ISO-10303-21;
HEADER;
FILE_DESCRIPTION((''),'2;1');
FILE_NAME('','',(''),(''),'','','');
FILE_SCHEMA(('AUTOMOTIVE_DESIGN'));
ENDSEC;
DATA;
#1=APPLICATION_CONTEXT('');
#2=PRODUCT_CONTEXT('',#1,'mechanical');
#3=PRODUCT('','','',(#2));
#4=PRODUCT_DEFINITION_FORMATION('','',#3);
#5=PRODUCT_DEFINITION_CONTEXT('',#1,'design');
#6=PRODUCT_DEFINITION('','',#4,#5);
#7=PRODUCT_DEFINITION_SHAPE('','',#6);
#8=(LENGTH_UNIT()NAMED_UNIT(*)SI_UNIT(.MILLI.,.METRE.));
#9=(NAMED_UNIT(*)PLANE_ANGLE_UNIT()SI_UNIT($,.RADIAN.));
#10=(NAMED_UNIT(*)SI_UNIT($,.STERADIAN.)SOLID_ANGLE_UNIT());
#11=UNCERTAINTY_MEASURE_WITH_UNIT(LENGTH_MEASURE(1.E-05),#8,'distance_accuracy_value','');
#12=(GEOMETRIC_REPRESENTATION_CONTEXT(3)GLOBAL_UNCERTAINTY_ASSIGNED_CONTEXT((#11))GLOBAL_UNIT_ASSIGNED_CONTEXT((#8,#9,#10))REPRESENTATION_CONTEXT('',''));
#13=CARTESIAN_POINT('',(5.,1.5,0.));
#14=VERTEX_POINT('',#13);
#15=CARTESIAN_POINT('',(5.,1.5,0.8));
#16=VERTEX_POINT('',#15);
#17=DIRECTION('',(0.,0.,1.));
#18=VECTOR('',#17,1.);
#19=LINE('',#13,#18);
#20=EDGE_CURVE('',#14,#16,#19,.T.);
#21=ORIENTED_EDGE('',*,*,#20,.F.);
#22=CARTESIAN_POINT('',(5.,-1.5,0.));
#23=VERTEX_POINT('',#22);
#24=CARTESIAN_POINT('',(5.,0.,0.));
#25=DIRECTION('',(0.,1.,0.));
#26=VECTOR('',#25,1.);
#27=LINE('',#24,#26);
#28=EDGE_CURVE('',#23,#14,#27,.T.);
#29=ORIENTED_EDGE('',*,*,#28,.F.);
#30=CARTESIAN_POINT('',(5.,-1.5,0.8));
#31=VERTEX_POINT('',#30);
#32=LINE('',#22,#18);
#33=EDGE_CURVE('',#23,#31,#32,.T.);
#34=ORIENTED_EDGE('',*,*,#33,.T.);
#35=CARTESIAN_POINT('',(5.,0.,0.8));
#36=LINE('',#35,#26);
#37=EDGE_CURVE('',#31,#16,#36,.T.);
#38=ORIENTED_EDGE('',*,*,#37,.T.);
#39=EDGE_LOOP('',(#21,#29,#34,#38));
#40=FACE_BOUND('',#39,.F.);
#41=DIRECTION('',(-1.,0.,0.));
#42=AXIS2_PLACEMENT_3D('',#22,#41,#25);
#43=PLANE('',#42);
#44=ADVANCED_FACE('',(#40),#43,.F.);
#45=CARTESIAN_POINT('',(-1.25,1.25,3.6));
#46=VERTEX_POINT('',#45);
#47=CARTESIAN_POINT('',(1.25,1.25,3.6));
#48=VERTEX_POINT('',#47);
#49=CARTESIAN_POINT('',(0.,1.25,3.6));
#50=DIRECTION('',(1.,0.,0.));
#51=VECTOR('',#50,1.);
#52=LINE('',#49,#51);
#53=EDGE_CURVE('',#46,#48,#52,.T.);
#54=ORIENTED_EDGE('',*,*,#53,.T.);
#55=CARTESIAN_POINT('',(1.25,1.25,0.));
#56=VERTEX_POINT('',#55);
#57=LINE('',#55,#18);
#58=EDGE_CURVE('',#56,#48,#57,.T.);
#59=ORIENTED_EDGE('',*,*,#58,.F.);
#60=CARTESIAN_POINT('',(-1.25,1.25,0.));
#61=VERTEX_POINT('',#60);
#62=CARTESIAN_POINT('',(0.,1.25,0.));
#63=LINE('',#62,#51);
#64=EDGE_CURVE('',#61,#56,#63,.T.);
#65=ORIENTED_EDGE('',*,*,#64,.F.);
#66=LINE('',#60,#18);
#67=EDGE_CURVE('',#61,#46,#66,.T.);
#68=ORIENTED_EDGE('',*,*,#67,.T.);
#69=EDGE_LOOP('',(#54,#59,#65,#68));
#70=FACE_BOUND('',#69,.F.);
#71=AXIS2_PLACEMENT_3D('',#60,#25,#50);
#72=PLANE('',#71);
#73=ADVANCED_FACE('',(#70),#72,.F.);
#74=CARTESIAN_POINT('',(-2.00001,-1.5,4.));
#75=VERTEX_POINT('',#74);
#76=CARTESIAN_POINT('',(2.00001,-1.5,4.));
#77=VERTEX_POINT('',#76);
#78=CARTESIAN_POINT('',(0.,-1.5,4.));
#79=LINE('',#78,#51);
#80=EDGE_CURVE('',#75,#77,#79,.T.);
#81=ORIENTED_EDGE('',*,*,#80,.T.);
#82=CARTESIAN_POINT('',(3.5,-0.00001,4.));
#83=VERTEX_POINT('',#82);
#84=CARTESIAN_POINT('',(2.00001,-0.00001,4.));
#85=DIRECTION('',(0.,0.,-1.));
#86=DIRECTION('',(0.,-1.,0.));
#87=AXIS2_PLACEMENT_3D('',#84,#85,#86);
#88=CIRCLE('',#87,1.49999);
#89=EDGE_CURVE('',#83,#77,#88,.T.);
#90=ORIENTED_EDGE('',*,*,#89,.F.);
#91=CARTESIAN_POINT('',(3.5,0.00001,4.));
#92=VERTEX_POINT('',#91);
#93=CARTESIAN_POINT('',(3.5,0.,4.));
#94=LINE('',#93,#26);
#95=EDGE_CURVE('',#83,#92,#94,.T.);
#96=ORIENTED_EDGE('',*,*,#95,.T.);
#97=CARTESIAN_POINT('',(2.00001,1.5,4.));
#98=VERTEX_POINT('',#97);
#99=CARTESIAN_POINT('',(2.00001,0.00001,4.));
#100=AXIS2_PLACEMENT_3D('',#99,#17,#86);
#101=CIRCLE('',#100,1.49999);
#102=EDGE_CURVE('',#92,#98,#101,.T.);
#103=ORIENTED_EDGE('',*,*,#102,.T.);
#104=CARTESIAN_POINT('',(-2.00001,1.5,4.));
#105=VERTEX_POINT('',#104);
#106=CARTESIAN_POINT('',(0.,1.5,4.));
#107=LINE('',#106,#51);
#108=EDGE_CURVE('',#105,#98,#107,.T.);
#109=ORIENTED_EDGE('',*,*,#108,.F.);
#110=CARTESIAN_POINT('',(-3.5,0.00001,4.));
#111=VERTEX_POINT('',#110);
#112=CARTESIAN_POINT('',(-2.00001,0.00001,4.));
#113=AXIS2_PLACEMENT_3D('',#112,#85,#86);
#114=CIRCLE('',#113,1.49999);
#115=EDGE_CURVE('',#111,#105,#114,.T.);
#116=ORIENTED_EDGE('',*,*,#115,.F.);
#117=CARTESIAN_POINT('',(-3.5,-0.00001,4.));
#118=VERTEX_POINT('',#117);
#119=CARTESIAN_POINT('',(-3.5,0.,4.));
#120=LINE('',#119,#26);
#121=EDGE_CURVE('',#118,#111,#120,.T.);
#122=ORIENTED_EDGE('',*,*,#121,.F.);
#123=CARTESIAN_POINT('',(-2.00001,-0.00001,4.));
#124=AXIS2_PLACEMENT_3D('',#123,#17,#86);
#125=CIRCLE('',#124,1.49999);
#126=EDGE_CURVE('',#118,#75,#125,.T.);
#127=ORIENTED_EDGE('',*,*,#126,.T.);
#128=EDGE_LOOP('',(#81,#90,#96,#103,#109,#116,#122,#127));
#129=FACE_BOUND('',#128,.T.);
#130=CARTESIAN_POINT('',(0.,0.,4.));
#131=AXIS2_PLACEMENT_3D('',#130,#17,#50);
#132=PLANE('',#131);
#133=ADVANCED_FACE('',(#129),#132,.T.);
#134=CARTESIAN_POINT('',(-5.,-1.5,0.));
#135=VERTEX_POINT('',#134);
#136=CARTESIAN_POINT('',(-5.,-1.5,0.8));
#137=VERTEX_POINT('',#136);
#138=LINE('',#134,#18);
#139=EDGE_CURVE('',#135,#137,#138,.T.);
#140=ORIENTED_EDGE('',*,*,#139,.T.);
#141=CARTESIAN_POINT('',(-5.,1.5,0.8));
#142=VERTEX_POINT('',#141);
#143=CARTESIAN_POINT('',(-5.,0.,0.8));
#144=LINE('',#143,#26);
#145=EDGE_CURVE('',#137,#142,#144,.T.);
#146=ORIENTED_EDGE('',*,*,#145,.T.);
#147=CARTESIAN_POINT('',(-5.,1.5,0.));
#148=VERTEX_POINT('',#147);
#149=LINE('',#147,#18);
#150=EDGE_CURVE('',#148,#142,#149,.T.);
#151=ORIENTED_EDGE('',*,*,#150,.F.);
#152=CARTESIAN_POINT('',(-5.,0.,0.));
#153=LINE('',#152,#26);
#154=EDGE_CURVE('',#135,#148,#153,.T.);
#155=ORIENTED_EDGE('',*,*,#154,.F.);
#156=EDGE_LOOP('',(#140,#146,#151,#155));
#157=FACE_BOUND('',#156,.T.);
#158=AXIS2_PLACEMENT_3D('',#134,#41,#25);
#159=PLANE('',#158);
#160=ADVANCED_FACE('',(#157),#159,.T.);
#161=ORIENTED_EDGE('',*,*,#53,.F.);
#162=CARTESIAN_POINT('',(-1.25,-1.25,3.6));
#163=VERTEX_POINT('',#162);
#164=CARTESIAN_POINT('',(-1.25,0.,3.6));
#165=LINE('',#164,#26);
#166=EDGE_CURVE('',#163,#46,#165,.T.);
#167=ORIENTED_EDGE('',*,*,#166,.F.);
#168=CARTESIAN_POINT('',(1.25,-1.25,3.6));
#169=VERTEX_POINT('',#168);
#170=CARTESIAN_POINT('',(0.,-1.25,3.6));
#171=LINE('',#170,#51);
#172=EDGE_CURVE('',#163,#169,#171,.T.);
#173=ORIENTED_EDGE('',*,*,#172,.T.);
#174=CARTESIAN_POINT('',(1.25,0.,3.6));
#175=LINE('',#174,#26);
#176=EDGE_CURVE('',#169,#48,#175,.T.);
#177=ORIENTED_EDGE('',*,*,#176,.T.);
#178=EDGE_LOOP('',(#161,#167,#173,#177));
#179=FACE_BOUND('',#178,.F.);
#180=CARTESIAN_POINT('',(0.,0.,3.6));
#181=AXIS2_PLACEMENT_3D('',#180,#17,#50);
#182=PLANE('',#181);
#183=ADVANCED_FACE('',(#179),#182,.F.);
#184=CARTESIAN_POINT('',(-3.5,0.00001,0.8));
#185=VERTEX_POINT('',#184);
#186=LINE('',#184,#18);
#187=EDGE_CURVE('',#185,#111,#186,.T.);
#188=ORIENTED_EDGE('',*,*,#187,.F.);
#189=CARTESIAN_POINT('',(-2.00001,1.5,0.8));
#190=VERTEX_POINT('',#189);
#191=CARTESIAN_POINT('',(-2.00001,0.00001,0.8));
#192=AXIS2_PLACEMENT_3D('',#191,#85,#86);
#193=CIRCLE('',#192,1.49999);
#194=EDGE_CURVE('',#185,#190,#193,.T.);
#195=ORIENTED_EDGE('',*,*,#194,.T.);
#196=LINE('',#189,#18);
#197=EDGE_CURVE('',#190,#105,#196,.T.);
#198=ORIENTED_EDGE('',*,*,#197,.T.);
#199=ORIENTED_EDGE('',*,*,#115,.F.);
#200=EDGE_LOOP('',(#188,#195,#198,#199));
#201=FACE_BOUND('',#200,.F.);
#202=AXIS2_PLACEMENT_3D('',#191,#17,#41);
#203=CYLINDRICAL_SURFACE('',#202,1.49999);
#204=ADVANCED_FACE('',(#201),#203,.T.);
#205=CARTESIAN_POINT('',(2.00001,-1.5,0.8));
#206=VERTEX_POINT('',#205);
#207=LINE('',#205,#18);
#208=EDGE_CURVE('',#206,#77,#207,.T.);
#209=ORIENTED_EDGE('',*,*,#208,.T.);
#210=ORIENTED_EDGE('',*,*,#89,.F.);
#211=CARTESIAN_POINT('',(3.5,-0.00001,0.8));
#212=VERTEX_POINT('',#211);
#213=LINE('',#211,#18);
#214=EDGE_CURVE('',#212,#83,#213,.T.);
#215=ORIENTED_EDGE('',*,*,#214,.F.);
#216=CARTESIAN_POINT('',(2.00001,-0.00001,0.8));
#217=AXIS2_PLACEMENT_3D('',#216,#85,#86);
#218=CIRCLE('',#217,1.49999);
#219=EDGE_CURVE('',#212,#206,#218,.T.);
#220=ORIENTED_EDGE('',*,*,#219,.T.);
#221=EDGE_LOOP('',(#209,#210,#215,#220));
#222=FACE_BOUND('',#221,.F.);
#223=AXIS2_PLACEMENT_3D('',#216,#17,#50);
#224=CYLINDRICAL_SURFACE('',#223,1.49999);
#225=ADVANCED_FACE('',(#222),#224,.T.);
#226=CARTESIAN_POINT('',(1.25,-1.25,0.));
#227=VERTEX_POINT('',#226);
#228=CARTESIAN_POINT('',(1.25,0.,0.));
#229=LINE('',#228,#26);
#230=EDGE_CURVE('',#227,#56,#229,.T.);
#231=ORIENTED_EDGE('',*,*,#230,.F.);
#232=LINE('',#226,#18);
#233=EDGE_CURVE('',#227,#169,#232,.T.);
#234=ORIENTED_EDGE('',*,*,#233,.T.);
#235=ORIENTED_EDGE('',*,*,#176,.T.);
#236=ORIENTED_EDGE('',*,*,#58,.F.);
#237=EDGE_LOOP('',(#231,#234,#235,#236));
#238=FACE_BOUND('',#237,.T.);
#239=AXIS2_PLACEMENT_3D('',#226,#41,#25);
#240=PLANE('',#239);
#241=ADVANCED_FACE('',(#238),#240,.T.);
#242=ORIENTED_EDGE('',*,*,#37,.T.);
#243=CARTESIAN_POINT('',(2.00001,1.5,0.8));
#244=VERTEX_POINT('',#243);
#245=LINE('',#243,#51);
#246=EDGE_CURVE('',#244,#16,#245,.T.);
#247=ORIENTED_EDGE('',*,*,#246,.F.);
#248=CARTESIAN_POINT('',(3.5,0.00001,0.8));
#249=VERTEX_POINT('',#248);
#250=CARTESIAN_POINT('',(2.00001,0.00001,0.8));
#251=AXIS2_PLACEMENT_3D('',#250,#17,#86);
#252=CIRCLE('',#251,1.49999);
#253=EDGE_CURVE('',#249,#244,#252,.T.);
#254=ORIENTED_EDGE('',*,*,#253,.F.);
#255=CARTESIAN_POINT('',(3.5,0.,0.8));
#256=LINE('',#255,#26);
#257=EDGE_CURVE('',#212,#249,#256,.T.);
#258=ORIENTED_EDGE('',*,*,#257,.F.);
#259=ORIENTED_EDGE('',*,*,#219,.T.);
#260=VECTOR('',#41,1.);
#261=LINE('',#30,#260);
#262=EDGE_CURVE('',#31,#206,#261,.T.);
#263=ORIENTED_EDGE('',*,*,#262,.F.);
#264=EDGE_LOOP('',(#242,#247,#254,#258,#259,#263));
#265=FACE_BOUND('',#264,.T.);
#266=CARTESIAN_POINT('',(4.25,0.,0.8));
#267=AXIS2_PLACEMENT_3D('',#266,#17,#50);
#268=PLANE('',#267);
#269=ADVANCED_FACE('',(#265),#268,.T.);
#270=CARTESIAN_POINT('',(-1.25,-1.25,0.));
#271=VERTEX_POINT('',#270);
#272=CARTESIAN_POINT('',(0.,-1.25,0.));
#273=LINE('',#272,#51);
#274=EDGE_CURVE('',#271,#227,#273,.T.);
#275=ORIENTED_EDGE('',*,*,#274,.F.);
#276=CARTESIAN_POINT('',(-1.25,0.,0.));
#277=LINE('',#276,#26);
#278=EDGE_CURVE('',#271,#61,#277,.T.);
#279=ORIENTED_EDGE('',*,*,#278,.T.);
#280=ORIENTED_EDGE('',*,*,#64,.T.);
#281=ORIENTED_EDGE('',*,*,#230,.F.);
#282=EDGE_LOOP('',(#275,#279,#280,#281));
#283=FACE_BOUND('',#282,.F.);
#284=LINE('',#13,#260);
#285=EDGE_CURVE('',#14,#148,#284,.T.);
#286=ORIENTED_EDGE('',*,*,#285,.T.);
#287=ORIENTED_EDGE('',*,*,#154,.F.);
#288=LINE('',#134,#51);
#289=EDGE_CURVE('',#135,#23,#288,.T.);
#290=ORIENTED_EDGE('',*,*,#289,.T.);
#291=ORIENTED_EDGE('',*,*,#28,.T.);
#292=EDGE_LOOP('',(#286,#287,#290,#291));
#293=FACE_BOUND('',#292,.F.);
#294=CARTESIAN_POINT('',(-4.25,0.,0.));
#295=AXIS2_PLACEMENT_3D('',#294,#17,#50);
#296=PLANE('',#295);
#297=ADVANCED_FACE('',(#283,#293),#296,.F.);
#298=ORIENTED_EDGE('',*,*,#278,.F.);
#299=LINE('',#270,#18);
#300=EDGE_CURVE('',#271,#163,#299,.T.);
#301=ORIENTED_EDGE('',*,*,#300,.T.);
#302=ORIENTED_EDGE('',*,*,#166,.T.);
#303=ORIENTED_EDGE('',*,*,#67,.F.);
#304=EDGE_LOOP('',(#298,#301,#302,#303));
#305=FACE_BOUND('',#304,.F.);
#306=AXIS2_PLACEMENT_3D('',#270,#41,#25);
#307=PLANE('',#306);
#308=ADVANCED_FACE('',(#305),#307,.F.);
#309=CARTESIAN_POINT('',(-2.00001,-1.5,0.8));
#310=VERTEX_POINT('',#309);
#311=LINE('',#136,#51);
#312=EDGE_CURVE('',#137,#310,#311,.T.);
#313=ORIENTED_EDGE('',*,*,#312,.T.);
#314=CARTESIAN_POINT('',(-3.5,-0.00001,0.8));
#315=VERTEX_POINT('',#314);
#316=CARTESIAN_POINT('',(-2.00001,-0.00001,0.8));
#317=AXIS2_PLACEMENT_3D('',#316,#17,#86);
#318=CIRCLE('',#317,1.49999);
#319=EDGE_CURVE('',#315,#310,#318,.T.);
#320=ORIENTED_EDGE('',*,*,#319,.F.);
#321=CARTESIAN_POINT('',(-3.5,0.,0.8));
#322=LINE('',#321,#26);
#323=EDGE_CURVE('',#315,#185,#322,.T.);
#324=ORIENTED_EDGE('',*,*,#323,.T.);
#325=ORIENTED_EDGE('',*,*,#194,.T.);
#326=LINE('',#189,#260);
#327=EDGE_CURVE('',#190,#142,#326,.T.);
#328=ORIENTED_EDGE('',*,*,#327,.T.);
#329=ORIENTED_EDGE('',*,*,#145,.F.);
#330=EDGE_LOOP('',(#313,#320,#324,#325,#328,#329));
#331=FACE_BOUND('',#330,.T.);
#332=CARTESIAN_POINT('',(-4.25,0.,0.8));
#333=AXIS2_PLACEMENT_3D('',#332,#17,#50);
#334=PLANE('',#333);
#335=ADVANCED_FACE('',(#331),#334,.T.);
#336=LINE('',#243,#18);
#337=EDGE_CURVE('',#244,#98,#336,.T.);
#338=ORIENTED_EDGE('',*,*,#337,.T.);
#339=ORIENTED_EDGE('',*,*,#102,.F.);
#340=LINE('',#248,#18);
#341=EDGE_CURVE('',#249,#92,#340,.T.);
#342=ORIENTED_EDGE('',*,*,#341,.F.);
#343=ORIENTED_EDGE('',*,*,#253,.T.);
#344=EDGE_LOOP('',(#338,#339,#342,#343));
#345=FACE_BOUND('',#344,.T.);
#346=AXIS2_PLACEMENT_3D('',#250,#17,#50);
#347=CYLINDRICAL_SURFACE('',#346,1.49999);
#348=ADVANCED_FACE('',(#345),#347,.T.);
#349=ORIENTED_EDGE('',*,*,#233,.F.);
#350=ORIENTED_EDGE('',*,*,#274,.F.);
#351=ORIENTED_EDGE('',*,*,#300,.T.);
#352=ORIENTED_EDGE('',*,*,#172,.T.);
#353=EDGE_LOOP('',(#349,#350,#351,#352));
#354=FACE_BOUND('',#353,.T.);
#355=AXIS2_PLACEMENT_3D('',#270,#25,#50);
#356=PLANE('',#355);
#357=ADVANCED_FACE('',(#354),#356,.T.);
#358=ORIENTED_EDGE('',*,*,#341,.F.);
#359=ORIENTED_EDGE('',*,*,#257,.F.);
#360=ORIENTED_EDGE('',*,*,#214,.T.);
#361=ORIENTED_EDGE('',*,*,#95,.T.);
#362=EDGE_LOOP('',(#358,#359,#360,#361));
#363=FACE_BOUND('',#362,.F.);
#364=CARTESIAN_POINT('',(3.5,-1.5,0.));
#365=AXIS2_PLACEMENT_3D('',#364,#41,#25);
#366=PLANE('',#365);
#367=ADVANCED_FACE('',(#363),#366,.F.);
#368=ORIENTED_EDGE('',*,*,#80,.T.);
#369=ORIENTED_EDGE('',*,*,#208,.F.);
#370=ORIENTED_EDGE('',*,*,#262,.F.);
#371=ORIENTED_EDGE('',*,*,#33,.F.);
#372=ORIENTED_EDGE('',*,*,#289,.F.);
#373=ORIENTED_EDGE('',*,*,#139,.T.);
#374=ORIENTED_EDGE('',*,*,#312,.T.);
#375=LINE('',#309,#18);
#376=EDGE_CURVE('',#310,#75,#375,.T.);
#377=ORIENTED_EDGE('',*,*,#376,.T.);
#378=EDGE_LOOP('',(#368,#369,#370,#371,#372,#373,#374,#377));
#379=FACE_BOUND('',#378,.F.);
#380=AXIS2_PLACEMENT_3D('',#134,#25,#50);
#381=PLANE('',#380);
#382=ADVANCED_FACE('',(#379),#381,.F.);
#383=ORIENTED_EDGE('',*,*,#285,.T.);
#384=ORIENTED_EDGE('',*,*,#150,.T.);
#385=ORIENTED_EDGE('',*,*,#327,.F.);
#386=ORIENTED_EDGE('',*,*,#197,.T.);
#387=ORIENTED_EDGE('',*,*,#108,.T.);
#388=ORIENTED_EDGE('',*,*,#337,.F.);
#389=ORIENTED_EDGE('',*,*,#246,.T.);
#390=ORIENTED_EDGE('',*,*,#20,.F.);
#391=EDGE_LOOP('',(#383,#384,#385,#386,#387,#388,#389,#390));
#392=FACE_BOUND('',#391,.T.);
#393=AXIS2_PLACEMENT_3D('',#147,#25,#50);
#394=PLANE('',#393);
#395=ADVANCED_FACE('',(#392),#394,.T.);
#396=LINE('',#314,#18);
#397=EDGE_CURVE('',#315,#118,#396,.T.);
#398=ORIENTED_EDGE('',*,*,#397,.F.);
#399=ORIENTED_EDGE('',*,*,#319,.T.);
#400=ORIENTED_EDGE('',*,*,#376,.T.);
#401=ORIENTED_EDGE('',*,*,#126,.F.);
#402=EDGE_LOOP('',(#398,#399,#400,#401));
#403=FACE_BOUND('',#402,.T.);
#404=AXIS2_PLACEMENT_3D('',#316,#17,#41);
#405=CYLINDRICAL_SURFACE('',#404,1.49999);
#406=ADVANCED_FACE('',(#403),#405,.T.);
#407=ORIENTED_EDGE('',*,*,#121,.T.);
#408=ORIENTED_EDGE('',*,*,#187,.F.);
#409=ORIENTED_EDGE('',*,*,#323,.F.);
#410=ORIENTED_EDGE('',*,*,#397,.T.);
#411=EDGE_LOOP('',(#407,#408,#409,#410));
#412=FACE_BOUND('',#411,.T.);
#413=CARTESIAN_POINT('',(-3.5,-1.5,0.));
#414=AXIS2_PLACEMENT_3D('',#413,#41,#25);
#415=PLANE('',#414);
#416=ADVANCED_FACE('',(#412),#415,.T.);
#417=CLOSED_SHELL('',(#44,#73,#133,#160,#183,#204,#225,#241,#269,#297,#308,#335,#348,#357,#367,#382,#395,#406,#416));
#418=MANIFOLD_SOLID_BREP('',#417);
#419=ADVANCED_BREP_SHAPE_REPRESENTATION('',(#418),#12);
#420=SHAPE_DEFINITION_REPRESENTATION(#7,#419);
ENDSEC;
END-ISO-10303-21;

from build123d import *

# Parameters (mm, degrees)
F0_W     = 7
F0_H     = 3
F0_W_2   = 2.5
F0_H_2   = 2.5
F1_DEPTH = 4
F0_W_3   = 1.5
F2_DEPTH = 0.8
F3_R     = 1.49999
F4_DEPTH = 3.6


# Not quite as in the source:
# - a fillet or chamfer is up to 0.001 mm smaller than in the source, because OpenCascade refuses the exact size


with BuildPart() as f1:
    # F0 (on Top) → F1 (new body)
    with BuildSketch(Plane.XY):
        Rectangle(F0_W, F0_H)
        Rectangle(F0_W_2, F0_H_2, mode=Mode.SUBTRACT)
        Rectangle(F0_W_2, F0_H_2)
    extrude(amount=F1_DEPTH)

    # F0 (on Top) → F2 (join)
    with BuildSketch(Plane.XY):
        with Locations((-4.25, 0)):
            Rectangle(F0_W_3, F0_H)
        with Locations((4.25, 0)):
            Rectangle(F0_W_3, F0_H)
    extrude(amount=F2_DEPTH)

    # F3 (radius 1.5 in the source; OpenCascade refuses exactly that, so slightly less here)
    f3_edges = [f1.edges().sort_by_distance(p)[0] for p in [
        (-3.5, 1.5, 2.4),
        (-3.5, -1.5, 2.4),
        (3.5, -1.5, 2.4),
        (3.5, 1.5, 2.4),
    ]]
    fillet(f3_edges, radius=F3_R)

    # F0 (on Top) → F4 (cut)
    with BuildSketch(Plane.XY):
        Rectangle(F0_W_2, F0_H_2)
    extrude(amount=F4_DEPTH, mode=Mode.SUBTRACT)


solid = f1.part
